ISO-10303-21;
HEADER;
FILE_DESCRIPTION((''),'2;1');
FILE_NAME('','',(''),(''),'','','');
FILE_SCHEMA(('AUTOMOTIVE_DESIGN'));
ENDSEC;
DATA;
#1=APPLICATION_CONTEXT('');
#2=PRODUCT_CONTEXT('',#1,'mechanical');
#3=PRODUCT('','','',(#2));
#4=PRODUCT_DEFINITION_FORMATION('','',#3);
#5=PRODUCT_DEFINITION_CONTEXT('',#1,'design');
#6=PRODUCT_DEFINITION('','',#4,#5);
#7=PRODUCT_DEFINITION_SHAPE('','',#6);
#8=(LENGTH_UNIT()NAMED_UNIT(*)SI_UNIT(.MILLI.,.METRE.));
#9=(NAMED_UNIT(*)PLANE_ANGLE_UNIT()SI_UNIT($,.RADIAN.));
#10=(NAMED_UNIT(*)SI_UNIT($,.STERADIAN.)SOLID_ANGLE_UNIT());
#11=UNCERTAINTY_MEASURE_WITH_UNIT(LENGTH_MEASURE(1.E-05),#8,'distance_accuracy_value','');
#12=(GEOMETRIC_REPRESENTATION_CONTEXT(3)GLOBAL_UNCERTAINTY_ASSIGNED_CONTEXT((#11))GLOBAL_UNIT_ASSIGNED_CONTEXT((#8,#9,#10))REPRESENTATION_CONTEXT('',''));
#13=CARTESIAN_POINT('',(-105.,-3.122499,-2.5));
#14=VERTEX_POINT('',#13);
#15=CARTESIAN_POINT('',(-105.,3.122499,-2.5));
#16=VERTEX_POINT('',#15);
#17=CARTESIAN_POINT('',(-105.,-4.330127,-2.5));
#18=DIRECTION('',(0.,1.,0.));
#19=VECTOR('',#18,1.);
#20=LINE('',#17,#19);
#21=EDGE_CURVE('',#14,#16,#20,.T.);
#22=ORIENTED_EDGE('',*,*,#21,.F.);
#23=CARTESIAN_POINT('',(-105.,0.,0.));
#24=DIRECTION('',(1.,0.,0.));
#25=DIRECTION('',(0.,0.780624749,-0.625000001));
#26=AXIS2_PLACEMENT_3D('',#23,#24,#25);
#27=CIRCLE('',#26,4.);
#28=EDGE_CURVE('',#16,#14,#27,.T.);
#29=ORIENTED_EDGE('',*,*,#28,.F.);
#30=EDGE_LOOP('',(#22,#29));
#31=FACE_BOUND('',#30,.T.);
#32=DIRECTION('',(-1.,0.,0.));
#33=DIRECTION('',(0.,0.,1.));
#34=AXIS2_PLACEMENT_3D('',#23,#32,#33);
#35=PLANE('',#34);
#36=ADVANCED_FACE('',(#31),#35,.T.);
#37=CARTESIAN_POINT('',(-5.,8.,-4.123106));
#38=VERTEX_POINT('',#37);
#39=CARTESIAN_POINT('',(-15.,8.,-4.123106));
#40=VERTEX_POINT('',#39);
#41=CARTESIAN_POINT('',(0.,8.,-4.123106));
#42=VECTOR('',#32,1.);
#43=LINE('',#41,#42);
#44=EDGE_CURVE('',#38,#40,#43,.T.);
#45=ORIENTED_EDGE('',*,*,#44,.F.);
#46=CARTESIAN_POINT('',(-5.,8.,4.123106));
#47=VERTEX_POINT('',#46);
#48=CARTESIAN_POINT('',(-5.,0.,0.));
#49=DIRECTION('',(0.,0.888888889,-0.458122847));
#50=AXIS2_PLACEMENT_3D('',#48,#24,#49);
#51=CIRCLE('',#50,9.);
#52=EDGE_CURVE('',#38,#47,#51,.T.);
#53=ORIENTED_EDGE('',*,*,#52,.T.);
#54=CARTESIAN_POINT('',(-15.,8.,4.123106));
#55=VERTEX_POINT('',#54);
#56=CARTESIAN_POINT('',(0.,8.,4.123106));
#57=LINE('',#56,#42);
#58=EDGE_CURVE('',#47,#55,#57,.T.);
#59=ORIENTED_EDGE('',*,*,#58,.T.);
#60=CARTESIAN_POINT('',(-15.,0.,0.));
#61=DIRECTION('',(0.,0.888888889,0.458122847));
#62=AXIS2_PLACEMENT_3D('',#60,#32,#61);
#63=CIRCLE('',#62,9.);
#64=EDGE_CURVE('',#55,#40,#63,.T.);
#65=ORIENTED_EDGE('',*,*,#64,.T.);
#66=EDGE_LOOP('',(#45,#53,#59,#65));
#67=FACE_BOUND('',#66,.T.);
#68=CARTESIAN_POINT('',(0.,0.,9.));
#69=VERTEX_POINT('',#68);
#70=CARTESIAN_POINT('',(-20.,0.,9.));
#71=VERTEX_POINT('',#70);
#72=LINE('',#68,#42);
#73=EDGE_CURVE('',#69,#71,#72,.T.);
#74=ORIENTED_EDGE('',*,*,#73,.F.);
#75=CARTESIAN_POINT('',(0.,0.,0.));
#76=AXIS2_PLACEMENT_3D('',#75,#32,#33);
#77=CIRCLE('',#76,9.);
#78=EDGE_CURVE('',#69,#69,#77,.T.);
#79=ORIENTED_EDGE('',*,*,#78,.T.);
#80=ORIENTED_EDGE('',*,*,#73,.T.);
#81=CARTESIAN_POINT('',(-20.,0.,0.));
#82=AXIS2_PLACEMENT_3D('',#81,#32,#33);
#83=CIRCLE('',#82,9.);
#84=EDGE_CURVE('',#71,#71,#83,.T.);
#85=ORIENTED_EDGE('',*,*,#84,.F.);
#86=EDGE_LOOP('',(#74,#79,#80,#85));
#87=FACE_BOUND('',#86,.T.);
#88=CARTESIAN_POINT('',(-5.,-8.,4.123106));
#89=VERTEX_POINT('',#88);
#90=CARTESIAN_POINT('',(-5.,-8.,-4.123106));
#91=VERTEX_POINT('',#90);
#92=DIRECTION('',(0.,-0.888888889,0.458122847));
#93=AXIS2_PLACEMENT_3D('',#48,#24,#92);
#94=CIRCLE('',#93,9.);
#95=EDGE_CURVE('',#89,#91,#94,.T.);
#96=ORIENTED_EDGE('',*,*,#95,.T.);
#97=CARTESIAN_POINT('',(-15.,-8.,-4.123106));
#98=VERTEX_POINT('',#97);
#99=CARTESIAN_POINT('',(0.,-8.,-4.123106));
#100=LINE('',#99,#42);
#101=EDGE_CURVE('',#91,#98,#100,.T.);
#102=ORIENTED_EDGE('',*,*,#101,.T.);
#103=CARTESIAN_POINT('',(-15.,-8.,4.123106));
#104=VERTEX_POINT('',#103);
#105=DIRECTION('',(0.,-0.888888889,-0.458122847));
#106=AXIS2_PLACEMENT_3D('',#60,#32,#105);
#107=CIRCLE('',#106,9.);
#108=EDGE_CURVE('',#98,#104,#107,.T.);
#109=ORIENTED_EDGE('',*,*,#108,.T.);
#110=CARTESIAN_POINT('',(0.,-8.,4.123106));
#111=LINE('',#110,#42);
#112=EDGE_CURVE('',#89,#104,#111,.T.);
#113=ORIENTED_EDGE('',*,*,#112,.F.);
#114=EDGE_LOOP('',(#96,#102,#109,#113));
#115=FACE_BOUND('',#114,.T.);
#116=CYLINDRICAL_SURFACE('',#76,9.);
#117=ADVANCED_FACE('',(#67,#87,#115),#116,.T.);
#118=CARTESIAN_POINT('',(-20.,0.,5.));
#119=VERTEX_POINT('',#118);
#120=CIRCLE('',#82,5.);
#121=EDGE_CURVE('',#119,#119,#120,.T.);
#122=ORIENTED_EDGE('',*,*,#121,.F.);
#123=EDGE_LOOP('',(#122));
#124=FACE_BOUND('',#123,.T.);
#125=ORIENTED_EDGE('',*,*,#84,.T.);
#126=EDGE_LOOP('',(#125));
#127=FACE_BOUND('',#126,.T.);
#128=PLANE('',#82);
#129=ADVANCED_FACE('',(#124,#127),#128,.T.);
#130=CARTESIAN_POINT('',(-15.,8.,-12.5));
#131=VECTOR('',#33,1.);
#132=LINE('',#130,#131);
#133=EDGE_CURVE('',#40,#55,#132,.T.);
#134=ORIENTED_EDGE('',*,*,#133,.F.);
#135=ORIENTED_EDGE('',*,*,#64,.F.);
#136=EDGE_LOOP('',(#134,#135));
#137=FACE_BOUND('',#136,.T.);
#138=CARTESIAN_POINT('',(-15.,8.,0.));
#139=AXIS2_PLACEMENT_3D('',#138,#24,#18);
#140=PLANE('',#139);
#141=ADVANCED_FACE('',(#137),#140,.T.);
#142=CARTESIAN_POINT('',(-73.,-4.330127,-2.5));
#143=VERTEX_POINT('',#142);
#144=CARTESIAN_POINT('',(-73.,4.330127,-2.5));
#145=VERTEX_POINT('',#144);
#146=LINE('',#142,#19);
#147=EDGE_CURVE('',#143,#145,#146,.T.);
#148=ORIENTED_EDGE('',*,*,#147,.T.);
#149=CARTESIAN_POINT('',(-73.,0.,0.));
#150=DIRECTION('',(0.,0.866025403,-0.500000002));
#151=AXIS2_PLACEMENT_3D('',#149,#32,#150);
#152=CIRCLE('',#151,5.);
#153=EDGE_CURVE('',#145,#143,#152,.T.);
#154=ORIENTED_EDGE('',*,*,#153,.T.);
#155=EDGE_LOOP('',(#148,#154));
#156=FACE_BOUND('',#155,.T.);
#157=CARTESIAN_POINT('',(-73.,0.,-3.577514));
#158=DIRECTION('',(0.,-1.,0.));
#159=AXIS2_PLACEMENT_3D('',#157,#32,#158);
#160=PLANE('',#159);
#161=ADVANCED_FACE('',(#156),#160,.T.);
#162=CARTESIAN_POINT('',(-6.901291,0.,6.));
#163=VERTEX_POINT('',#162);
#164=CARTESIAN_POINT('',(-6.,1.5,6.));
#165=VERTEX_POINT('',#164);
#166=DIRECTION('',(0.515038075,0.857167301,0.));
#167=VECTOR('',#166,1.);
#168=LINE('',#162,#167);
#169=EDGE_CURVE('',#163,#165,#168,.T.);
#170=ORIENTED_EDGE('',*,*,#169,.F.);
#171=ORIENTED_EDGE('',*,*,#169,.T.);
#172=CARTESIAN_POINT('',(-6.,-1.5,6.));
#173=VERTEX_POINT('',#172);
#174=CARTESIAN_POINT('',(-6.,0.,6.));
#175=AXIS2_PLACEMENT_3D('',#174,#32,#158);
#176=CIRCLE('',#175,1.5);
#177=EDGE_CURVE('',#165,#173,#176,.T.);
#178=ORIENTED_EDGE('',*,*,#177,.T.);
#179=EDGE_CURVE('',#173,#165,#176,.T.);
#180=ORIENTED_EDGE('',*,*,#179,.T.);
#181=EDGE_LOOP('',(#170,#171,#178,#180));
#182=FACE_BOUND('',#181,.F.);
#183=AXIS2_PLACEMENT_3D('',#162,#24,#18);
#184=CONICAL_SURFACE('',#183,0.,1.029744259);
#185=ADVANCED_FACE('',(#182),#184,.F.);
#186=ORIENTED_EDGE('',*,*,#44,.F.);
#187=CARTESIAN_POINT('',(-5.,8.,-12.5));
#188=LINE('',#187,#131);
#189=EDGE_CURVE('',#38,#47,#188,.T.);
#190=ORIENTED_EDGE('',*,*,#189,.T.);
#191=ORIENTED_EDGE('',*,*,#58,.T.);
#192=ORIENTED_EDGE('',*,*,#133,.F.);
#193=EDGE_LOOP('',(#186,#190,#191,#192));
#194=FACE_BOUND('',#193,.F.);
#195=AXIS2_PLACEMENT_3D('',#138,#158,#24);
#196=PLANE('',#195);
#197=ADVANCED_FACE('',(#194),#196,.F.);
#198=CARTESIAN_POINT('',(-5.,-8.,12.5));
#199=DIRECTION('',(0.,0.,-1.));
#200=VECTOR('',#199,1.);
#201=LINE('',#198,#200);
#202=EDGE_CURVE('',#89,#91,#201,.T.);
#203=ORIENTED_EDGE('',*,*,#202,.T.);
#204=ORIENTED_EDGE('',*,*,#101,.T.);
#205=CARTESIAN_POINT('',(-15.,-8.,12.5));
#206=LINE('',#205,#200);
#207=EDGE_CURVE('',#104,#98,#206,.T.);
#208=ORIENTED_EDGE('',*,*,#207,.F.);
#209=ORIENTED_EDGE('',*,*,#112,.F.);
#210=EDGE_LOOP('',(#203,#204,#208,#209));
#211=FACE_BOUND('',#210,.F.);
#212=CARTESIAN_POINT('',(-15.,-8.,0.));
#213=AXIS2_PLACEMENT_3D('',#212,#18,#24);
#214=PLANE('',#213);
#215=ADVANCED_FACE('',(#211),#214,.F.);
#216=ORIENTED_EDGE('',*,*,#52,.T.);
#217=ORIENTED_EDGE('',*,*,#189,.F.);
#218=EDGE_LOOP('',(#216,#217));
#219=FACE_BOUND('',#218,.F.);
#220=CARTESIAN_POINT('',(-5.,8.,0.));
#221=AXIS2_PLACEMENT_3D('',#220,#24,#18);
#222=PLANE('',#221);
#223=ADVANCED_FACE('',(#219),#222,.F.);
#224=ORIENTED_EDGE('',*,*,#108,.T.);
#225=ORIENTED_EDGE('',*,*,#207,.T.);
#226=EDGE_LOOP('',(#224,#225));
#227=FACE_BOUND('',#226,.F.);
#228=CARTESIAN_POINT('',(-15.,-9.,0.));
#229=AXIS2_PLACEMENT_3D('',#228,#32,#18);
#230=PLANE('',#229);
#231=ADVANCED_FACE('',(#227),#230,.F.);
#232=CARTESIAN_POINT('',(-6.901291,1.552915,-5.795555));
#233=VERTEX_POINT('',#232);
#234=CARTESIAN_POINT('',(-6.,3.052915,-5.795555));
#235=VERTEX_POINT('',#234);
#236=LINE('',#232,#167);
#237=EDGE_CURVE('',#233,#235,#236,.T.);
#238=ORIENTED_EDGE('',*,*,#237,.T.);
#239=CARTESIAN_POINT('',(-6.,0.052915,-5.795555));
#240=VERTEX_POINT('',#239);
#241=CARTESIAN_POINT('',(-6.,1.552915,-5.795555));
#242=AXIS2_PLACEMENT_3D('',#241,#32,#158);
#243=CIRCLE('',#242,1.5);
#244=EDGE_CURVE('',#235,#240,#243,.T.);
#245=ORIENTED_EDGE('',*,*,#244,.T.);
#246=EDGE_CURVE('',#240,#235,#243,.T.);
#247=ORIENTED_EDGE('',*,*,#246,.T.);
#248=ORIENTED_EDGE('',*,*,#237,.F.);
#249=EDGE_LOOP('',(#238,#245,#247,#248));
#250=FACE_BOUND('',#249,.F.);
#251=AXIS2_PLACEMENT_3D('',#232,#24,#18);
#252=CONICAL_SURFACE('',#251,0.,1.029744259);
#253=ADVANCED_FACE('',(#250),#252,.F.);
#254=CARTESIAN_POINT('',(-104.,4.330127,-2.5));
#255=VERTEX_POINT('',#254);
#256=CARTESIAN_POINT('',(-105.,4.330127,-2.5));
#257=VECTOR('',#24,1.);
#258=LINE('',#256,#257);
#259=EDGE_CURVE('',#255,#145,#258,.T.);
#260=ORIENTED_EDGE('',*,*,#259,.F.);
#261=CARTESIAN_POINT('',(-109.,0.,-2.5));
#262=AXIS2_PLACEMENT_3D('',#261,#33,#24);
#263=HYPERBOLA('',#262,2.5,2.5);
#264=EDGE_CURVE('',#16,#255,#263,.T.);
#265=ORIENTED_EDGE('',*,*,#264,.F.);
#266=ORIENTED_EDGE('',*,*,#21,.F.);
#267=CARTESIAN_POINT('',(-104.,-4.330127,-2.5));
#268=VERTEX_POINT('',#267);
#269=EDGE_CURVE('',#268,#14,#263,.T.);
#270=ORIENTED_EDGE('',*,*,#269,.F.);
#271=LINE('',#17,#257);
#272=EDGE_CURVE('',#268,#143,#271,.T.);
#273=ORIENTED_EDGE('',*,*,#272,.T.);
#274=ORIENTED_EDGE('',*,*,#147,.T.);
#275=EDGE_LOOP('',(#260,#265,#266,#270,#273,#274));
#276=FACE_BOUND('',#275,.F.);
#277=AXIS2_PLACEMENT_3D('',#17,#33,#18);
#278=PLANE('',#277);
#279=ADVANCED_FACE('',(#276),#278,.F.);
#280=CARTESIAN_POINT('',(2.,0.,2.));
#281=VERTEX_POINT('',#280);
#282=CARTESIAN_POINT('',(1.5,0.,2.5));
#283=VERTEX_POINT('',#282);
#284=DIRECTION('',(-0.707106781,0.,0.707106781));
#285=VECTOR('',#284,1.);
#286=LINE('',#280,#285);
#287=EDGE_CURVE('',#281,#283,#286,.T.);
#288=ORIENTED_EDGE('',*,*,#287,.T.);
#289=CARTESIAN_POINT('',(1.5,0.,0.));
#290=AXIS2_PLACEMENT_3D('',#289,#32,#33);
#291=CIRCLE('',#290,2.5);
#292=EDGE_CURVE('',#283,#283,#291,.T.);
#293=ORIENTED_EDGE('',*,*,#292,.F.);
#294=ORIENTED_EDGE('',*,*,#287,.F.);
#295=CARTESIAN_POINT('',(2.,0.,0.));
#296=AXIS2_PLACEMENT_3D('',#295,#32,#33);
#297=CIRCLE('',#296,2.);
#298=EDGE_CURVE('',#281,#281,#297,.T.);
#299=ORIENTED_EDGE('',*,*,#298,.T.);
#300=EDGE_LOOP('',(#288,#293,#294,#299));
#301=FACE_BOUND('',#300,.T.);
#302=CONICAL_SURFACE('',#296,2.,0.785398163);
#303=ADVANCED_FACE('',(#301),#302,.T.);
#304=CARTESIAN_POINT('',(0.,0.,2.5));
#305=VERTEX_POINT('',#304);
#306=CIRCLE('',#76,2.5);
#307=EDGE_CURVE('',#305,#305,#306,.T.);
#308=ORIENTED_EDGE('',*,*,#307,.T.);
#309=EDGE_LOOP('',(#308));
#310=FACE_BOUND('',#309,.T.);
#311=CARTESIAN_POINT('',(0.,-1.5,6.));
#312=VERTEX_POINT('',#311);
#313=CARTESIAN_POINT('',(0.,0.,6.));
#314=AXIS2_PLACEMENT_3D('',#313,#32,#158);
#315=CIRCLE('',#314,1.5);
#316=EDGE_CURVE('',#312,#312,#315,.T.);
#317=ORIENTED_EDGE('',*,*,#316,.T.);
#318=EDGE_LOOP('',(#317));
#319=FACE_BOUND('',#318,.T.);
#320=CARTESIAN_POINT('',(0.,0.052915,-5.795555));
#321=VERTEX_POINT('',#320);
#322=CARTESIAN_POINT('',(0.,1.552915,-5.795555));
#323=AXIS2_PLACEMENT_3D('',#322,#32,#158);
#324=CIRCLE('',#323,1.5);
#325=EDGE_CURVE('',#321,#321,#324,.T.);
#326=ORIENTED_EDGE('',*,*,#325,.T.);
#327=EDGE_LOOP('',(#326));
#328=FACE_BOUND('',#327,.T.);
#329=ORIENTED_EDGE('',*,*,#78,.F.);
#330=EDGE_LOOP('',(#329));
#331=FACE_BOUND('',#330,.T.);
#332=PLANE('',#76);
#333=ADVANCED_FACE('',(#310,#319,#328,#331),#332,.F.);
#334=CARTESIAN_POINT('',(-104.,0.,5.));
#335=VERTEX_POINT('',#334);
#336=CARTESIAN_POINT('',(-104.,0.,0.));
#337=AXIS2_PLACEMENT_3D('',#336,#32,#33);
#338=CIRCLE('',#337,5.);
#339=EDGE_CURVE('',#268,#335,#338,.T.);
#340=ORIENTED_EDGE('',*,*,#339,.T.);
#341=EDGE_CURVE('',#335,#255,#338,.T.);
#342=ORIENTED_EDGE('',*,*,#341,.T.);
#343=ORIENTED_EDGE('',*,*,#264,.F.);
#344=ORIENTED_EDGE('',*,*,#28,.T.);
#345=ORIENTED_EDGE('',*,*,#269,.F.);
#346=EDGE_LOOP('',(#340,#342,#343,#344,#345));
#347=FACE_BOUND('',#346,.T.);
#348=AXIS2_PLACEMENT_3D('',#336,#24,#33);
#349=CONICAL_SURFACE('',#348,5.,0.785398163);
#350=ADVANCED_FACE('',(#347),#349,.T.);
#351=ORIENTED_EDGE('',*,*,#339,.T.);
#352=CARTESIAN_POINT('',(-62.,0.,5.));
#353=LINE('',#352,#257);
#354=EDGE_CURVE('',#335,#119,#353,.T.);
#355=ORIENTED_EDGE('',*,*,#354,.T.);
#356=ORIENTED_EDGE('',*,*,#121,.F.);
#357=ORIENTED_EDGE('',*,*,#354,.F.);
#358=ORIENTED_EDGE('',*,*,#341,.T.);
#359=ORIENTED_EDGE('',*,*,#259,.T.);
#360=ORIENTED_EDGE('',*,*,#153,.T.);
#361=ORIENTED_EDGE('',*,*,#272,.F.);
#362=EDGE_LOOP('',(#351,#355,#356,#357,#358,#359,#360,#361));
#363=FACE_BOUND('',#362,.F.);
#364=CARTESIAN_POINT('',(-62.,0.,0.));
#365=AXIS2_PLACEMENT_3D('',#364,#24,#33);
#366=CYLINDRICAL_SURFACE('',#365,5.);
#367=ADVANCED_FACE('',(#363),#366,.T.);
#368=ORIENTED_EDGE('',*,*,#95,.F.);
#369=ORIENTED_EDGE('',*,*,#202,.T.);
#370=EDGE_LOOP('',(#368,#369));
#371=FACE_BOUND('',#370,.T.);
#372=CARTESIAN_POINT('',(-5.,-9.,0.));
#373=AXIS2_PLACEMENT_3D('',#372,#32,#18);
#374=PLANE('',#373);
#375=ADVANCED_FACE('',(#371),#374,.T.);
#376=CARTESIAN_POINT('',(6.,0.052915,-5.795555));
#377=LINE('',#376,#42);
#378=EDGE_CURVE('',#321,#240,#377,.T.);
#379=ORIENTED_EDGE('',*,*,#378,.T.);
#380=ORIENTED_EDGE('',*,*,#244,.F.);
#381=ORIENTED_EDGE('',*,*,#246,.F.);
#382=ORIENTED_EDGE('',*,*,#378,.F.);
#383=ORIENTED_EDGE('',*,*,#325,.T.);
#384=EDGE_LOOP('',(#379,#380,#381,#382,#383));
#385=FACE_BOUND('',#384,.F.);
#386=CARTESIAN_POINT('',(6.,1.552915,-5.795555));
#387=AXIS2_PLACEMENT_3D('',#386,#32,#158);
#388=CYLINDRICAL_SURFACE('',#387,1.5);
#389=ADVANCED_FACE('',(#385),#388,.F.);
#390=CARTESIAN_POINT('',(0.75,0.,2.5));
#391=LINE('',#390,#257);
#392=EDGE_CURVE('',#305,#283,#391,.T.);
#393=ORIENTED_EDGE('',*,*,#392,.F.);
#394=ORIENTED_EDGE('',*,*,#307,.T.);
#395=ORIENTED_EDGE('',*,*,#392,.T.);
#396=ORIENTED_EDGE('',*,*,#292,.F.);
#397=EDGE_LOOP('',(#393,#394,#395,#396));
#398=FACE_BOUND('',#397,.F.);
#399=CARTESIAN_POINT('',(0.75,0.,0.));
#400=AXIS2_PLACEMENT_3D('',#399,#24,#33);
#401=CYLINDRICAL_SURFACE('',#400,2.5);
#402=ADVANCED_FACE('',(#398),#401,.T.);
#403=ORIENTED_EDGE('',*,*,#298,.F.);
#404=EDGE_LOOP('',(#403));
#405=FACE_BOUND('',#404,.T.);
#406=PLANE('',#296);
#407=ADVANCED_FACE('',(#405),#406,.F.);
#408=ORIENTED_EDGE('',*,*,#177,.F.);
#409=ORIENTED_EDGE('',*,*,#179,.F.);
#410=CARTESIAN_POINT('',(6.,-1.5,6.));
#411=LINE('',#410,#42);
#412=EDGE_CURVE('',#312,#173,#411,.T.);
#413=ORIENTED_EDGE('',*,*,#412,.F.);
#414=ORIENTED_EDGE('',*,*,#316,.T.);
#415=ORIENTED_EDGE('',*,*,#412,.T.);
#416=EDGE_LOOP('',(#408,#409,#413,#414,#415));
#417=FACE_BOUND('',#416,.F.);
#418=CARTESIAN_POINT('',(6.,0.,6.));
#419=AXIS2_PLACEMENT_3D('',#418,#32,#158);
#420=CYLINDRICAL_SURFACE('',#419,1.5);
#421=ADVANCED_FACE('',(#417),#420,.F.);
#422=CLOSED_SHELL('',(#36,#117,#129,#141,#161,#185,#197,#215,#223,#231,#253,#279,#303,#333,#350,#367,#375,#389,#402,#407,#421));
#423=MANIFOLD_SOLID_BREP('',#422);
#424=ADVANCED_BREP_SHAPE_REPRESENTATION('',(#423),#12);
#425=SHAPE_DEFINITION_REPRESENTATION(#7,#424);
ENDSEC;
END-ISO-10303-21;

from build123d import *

# Parameters (mm, degrees)
F0_W     = 1.5
F0_H     = 2.5
F0_W_2   = 84
F0_H_2   = 5
F0_W_3   = 6
F0_H_3   = 1.23
F0_H_4   = 0.27
F3_DEPTH = 32
F4_W     = 10
F4_H     = 1
F5_DEPTH = 12.5
F8_D     = 3
F8_DEPTH = 6
F8_TIP   = 0.9012909285


# Not quite as in the source:
# - ends of sketch curves that miss each other by under 0.0002 mm in the source are joined


with BuildPart() as f1:
    # F0 (on Front) → F1 (revolve)
    with BuildSketch(Plane.XZ):
        with Locations((0.75, 1.25)):
            Rectangle(F0_W, F0_H)
        Polygon((-10, 0), (-5, 0), (-5, 4.123106), align=None)
        Polygon((-8.210141, 6), (-7.5, 6), (-7.5, 7.23), align=None)
        Polygon((-15, 0), (-10, 0), (-15, 4.123106), align=None)
        with Locations((-62, 2.5)):
            Rectangle(F0_W_2, F0_H_2)
        Polygon((0, 0), (0, 2.5), (0, 4.5), (-6, 4.5), (-6.467654, 4.77), (-7.5, 4.77), (-8.210141, 6), (-7.5, 7.23), (-6.467654, 7.23), (-6, 7.5), (0, 7.5), (0, 9), (-20, 9), (-20, 5), (-20, 0), (-15, 0), (-15, 4.123106), (-5, 4.123106), (-5, 0), align=None)
        Polygon((-15, 4.123106), (-9.9999998364, 3.651e-07), (-5, 4.123106), align=None)
        with Locations((-3, 6.615)):
            Rectangle(F0_W_3, F0_H_3)
        Polygon((2, 2), (1.5, 2.5), (1.5, 0), (2, 0), align=None)
        with Locations((-3, 5.385)):
            Rectangle(F0_W_3, F0_H_3)
        Polygon((-7.5, 6), (-6, 6), (-6, 7.23), (-6.467654, 7.23), (-7.5, 7.23), align=None)
        Polygon((-6.467654, 4.77), (-6, 4.77), (-6, 6), (-7.5, 6), (-7.5, 4.77), align=None)
        Polygon((-8.210141, 6), (-7.5, 4.77), (-7.5, 6), align=None)
        with Locations((-3, 7.365)):
            Rectangle(F0_W_3, F0_H_4)
        with Locations((-3, 4.635)):
            Rectangle(F0_W_3, F0_H_4)
        Polygon((-6.467654, 4.77), (-6, 4.5), (-6, 4.77), align=None)
        Polygon((-6.467654, 7.23), (-6, 7.23), (-6, 7.5), align=None)
        Polygon((-105, 0), (-104, 0), (-104, 5), (-105, 4), align=None)
    revolve(axis=Axis((-53, 0, 0), (-1, 0, 0)))

    # F2 (on face) → F3 (cut)
    with BuildSketch(Plane(origin=(-105, 0, 0), x_dir=(0, -1, 0), z_dir=(-1, 0, 0))):
        with BuildLine():
            Line((-3.1224989992, -2.5), (-4.330127, -2.5))
            ThreePointArc((-4.3301270142, -2.5000000082), (0, -5), (4.3301270142, -2.5000000082))
            Line((4.330127, -2.5), (3.1224989992, -2.5))
            ThreePointArc((3.1224989992, -2.5), (0, -4), (-3.1224989992, -2.5))
        make_face()
        with BuildLine():
            Line((3.1224989992, -2.5), (-3.1224989992, -2.5))
            ThreePointArc((-3.1224989992, -2.5), (0, -4), (3.1224989992, -2.5))
        make_face()
    extrude(amount=-F3_DEPTH, mode=Mode.SUBTRACT)

    # F4 (on Top) → F5 (cut, symmetric)
    with BuildSketch(Plane.XY):
        with Locations((-10, -8.5)):
            Rectangle(F4_W, F4_H)
        with Locations((-10, 8.5)):
            Rectangle(F4_W, F4_H)
    extrude(amount=F5_DEPTH, both=True, mode=Mode.SUBTRACT)

    # F8
    with Locations(Plane.YZ):
        with Locations((0, 6), (1.552915, -5.795555)):
            Hole(F8_D / 2, depth=F8_DEPTH)
            with Locations((0, 0, -(F8_DEPTH + F8_TIP / 2))):  # 118° drill point
                Cone(0, F8_D / 2, F8_TIP, mode=Mode.SUBTRACT)


solid = f1.part
